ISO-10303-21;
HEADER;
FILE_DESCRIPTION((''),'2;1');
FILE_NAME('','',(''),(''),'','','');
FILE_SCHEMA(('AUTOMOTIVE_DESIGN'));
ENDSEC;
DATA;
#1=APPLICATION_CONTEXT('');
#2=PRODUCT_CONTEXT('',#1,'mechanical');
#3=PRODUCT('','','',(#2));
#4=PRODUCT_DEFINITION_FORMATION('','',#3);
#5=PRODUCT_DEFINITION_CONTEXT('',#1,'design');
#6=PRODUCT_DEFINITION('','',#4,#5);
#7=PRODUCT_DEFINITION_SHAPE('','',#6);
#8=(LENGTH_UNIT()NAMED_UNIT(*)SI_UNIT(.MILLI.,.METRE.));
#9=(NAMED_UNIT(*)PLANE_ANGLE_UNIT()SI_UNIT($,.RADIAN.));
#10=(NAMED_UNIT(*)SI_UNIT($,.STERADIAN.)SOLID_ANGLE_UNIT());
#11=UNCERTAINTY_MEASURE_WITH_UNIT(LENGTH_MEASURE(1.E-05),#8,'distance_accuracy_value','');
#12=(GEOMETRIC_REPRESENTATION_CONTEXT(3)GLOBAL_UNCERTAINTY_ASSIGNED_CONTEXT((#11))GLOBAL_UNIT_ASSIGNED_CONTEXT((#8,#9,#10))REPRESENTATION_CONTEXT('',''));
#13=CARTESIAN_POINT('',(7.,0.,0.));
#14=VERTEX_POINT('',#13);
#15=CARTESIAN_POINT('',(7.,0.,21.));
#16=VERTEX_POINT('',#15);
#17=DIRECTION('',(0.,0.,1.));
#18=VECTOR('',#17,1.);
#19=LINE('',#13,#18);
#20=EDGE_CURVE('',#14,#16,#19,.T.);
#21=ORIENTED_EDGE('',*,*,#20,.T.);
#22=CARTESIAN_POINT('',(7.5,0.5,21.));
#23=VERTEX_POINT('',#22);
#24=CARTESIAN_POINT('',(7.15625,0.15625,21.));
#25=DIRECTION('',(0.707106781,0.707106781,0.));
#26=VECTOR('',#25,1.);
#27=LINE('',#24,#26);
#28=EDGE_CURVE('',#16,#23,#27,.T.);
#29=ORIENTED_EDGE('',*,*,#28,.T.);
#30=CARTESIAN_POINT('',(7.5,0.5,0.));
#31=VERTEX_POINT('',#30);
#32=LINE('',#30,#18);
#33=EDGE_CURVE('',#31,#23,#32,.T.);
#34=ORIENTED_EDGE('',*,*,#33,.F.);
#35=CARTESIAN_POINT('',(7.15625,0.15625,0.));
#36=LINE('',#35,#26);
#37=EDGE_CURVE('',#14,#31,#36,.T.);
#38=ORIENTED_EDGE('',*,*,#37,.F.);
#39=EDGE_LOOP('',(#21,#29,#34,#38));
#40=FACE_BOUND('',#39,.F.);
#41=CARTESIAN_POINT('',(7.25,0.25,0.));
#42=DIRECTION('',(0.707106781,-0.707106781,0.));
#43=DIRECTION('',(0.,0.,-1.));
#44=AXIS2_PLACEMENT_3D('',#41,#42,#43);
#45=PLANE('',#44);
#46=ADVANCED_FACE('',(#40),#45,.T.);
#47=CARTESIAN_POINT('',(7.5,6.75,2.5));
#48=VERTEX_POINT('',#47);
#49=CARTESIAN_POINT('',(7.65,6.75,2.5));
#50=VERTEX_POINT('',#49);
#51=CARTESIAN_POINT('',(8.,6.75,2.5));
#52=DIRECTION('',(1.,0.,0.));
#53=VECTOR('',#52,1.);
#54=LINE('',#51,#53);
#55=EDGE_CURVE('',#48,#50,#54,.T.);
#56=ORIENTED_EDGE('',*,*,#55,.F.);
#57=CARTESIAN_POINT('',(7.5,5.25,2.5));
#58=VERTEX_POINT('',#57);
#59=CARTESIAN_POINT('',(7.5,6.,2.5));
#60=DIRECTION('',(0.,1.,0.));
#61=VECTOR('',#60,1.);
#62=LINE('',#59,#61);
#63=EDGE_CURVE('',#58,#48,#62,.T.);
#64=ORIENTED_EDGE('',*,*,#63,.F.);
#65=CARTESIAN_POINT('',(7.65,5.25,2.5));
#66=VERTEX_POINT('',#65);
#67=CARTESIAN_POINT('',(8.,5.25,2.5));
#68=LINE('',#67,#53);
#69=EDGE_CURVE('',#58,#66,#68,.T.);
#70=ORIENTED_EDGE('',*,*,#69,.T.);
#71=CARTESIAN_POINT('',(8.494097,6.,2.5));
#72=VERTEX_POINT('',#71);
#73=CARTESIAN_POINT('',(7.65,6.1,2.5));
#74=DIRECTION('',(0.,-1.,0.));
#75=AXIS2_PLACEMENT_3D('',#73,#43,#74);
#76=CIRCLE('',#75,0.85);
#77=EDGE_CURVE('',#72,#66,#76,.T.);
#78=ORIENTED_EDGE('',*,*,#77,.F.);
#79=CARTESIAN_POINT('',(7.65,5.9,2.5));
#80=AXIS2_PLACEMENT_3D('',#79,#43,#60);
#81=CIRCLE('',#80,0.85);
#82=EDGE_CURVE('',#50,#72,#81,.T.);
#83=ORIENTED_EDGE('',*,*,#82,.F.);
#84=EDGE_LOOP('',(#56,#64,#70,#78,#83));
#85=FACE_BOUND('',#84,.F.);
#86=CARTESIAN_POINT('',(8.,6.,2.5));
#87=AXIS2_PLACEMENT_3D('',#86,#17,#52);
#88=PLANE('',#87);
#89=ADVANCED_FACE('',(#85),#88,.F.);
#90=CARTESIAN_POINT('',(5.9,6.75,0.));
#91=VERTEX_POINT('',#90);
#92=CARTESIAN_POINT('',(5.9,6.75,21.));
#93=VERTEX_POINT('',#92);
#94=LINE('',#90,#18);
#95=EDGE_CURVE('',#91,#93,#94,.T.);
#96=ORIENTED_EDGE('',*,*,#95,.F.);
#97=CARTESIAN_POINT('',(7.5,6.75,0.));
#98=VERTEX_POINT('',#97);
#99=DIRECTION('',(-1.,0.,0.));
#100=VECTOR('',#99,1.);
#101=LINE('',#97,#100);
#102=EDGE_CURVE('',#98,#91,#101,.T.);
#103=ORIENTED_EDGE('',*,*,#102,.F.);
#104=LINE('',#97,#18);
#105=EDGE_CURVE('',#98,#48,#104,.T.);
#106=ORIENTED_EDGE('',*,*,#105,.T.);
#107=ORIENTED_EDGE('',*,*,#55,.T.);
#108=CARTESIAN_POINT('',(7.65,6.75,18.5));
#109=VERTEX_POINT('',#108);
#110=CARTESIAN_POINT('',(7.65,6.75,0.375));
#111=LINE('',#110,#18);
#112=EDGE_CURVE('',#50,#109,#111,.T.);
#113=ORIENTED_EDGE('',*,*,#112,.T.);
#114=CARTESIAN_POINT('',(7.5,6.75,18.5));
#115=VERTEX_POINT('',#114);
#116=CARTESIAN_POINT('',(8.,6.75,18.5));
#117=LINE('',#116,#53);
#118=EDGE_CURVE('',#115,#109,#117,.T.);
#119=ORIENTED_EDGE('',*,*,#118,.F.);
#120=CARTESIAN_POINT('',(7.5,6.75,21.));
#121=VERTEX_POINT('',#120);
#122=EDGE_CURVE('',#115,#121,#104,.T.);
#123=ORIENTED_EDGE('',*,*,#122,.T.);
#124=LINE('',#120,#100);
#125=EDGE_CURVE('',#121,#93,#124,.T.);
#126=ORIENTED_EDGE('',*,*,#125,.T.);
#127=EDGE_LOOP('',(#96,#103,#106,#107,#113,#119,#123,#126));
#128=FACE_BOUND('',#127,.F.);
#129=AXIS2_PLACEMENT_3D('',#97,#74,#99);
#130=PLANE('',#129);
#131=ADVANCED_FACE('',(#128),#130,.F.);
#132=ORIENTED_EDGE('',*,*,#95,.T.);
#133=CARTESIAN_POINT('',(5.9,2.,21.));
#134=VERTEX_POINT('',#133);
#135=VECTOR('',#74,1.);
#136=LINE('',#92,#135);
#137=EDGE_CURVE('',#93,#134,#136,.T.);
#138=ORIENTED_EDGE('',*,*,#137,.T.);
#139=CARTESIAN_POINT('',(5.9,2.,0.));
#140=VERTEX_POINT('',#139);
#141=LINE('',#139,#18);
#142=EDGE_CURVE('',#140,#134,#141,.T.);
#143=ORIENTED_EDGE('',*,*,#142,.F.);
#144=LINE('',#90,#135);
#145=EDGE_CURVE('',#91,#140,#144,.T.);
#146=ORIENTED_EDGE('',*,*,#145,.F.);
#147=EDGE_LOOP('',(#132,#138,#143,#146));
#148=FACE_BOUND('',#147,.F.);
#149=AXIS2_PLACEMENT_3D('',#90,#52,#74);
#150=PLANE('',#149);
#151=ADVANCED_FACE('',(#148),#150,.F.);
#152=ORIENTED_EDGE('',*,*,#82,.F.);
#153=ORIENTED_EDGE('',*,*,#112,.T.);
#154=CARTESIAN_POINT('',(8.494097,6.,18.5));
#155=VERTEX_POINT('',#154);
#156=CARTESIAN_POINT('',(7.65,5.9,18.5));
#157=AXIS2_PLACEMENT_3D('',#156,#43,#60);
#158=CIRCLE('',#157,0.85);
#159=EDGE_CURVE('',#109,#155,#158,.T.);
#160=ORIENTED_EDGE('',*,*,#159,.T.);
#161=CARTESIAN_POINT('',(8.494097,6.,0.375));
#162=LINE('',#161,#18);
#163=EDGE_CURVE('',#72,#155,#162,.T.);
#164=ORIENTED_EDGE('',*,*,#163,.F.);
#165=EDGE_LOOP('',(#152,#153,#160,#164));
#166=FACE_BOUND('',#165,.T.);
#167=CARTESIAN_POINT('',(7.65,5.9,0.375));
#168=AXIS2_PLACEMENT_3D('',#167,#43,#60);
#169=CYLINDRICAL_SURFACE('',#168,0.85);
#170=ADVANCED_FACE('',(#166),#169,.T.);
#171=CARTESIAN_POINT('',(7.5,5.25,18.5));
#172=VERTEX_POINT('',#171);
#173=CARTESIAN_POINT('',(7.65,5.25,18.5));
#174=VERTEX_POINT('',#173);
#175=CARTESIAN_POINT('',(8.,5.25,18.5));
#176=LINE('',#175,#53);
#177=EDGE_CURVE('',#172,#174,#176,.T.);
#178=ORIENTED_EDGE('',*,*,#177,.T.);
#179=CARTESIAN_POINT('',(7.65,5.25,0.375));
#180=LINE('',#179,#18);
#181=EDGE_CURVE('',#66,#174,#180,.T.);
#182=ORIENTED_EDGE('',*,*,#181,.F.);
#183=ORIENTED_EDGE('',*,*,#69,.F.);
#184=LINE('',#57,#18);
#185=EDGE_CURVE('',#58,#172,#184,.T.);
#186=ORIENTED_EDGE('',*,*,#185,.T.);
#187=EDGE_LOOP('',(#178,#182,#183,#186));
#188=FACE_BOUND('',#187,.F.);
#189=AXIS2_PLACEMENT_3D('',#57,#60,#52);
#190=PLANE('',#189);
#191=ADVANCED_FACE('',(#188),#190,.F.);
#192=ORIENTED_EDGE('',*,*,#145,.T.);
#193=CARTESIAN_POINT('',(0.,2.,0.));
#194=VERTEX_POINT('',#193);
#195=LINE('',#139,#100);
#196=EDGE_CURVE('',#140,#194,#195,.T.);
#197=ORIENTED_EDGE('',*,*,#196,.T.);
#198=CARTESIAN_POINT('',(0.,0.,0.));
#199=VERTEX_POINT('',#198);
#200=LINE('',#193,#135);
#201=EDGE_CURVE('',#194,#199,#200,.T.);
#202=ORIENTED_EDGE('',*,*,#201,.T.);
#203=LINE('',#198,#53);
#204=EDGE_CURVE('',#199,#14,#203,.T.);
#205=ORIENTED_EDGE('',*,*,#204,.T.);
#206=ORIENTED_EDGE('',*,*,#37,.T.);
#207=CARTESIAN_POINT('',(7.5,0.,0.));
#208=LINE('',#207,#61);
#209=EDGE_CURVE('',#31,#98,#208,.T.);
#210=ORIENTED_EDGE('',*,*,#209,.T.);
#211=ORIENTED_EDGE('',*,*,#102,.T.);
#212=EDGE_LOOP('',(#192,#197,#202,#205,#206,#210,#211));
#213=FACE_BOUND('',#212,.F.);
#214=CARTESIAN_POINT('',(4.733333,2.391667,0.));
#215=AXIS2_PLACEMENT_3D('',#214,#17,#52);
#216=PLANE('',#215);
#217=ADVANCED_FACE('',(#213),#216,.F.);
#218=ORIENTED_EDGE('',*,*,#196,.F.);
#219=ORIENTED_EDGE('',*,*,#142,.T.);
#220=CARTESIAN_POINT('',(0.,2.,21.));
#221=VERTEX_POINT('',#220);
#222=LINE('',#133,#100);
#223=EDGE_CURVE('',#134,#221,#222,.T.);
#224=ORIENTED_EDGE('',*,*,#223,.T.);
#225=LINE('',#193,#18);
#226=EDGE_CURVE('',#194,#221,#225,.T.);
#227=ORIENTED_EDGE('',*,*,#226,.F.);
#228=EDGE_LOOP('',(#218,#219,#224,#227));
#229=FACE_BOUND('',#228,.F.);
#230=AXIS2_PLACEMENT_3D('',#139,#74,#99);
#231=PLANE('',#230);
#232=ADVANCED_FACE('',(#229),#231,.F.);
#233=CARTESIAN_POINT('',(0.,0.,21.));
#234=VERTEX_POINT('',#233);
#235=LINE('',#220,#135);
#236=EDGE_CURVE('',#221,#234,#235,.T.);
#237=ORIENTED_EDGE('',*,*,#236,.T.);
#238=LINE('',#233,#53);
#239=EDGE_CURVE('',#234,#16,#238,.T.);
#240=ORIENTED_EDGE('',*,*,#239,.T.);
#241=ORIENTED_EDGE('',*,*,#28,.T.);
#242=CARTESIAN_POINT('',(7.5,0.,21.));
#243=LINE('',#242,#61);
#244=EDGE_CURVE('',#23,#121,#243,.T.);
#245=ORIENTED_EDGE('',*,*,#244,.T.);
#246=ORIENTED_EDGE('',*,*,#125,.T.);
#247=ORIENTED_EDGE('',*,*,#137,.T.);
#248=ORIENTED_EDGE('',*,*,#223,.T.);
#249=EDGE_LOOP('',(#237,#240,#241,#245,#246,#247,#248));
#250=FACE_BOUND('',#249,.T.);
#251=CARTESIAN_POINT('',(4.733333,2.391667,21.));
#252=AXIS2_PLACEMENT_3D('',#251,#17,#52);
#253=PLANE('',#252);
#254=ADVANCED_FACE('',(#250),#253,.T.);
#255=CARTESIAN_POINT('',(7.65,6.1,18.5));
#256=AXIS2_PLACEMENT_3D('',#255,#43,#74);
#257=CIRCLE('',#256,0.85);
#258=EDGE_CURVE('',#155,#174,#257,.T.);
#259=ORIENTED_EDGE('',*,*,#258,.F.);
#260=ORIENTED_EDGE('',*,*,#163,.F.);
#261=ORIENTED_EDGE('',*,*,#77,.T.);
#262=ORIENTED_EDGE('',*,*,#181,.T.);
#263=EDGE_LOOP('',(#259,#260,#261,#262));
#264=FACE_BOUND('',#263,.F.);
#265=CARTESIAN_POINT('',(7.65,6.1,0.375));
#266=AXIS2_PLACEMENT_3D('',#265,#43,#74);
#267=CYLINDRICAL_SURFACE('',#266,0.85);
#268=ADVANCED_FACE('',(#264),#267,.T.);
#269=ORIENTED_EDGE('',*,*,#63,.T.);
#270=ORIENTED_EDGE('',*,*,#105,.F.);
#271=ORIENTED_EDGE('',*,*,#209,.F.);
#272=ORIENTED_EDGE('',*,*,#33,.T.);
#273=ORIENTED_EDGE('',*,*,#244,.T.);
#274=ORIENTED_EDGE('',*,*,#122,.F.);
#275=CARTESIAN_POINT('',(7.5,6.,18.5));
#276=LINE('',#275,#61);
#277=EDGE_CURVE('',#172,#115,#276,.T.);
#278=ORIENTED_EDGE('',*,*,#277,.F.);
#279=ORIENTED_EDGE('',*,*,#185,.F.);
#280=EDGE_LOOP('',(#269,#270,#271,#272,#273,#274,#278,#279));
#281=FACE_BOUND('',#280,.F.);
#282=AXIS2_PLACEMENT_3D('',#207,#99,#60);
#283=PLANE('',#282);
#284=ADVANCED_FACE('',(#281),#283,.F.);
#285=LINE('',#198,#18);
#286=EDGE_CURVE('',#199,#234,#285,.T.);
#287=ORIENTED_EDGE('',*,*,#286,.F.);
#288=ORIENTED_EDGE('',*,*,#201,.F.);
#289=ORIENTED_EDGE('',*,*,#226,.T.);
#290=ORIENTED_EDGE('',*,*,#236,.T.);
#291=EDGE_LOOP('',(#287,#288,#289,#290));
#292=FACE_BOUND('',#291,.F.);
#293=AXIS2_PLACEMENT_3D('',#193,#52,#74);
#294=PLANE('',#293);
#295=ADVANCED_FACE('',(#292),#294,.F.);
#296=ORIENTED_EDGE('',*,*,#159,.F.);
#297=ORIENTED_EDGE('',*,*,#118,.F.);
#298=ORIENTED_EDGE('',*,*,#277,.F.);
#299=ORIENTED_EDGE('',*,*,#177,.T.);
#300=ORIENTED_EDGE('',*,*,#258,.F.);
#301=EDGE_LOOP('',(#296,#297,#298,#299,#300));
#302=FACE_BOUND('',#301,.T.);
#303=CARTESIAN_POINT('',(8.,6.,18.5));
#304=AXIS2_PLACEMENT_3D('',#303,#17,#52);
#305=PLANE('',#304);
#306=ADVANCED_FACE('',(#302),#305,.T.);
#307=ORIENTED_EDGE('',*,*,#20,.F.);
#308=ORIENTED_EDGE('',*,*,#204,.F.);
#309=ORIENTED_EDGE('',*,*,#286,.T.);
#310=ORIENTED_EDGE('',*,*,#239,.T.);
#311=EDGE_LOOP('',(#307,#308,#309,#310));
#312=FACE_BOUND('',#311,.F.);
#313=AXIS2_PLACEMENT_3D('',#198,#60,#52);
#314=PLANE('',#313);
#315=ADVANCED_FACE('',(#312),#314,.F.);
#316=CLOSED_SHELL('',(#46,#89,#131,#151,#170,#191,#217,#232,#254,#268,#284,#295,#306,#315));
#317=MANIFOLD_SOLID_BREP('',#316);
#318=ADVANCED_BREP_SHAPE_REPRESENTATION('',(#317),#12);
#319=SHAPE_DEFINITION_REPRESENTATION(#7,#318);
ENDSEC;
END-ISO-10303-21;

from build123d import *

# Parameters (mm, degrees)
F1_DEPTH    = 21
F2_START    = 2.5
F0_W        = 1
F0_H        = 1.5
F2_DEPTH    = 16
F3_SIZE     = 0.5
F4_T1_DEPTH = 20.25


# Not quite as in the source:
# - a fillet or chamfer that OpenCascade refuses, or shapes differently, is made with other operations: its cross-section is extruded or revolved along the edge and cut away or added


with BuildPart() as f1:
    # F0 (on Top) → F1 (new body)
    with BuildSketch(Plane.XY):
        Polygon((0, 2), (0, 0), (7.5, 0), (7.5, 5.25), (7.5, 6.75), (5.9, 6.75), (5.9, 2), align=None)
    extrude(amount=F1_DEPTH)

    # F0 (on Top) → F2 (join)
    with BuildSketch(Plane.XY.offset(F2_START)):
        with Locations((8, 6)):
            Rectangle(F0_W, F0_H)
    extrude(amount=F2_DEPTH)

    # F3
    f3_edges = [f1.edges().sort_by_distance(p)[0] for p in [
        (7.5, 0, 10.5),
    ]]
    chamfer(f3_edges, length=F3_SIZE)

    # F4: fillet of radius 0.85 on 2 edges, made by hand

    # F4_s2 → F4_t1 (cut)
    with BuildSketch(Plane.XY.offset(0.375)):
        with BuildLine():
            ThreePointArc((7.65, 6.75), (8.251040764, 6.501040764), (8.5, 5.9))
            Line((8.5, 5.9), (8.5, 6.75))
            Line((8.5, 6.75), (7.65, 6.75))
        make_face()
        with BuildLine():
            ThreePointArc((7.65, 5.25), (8.251040764, 5.498959236), (8.5, 6.1))
            Line((8.5, 6.1), (8.5, 5.25))
            Line((8.5, 5.25), (7.65, 5.25))
        make_face()
    extrude(amount=F4_T1_DEPTH, mode=Mode.SUBTRACT)


solid = f1.part
